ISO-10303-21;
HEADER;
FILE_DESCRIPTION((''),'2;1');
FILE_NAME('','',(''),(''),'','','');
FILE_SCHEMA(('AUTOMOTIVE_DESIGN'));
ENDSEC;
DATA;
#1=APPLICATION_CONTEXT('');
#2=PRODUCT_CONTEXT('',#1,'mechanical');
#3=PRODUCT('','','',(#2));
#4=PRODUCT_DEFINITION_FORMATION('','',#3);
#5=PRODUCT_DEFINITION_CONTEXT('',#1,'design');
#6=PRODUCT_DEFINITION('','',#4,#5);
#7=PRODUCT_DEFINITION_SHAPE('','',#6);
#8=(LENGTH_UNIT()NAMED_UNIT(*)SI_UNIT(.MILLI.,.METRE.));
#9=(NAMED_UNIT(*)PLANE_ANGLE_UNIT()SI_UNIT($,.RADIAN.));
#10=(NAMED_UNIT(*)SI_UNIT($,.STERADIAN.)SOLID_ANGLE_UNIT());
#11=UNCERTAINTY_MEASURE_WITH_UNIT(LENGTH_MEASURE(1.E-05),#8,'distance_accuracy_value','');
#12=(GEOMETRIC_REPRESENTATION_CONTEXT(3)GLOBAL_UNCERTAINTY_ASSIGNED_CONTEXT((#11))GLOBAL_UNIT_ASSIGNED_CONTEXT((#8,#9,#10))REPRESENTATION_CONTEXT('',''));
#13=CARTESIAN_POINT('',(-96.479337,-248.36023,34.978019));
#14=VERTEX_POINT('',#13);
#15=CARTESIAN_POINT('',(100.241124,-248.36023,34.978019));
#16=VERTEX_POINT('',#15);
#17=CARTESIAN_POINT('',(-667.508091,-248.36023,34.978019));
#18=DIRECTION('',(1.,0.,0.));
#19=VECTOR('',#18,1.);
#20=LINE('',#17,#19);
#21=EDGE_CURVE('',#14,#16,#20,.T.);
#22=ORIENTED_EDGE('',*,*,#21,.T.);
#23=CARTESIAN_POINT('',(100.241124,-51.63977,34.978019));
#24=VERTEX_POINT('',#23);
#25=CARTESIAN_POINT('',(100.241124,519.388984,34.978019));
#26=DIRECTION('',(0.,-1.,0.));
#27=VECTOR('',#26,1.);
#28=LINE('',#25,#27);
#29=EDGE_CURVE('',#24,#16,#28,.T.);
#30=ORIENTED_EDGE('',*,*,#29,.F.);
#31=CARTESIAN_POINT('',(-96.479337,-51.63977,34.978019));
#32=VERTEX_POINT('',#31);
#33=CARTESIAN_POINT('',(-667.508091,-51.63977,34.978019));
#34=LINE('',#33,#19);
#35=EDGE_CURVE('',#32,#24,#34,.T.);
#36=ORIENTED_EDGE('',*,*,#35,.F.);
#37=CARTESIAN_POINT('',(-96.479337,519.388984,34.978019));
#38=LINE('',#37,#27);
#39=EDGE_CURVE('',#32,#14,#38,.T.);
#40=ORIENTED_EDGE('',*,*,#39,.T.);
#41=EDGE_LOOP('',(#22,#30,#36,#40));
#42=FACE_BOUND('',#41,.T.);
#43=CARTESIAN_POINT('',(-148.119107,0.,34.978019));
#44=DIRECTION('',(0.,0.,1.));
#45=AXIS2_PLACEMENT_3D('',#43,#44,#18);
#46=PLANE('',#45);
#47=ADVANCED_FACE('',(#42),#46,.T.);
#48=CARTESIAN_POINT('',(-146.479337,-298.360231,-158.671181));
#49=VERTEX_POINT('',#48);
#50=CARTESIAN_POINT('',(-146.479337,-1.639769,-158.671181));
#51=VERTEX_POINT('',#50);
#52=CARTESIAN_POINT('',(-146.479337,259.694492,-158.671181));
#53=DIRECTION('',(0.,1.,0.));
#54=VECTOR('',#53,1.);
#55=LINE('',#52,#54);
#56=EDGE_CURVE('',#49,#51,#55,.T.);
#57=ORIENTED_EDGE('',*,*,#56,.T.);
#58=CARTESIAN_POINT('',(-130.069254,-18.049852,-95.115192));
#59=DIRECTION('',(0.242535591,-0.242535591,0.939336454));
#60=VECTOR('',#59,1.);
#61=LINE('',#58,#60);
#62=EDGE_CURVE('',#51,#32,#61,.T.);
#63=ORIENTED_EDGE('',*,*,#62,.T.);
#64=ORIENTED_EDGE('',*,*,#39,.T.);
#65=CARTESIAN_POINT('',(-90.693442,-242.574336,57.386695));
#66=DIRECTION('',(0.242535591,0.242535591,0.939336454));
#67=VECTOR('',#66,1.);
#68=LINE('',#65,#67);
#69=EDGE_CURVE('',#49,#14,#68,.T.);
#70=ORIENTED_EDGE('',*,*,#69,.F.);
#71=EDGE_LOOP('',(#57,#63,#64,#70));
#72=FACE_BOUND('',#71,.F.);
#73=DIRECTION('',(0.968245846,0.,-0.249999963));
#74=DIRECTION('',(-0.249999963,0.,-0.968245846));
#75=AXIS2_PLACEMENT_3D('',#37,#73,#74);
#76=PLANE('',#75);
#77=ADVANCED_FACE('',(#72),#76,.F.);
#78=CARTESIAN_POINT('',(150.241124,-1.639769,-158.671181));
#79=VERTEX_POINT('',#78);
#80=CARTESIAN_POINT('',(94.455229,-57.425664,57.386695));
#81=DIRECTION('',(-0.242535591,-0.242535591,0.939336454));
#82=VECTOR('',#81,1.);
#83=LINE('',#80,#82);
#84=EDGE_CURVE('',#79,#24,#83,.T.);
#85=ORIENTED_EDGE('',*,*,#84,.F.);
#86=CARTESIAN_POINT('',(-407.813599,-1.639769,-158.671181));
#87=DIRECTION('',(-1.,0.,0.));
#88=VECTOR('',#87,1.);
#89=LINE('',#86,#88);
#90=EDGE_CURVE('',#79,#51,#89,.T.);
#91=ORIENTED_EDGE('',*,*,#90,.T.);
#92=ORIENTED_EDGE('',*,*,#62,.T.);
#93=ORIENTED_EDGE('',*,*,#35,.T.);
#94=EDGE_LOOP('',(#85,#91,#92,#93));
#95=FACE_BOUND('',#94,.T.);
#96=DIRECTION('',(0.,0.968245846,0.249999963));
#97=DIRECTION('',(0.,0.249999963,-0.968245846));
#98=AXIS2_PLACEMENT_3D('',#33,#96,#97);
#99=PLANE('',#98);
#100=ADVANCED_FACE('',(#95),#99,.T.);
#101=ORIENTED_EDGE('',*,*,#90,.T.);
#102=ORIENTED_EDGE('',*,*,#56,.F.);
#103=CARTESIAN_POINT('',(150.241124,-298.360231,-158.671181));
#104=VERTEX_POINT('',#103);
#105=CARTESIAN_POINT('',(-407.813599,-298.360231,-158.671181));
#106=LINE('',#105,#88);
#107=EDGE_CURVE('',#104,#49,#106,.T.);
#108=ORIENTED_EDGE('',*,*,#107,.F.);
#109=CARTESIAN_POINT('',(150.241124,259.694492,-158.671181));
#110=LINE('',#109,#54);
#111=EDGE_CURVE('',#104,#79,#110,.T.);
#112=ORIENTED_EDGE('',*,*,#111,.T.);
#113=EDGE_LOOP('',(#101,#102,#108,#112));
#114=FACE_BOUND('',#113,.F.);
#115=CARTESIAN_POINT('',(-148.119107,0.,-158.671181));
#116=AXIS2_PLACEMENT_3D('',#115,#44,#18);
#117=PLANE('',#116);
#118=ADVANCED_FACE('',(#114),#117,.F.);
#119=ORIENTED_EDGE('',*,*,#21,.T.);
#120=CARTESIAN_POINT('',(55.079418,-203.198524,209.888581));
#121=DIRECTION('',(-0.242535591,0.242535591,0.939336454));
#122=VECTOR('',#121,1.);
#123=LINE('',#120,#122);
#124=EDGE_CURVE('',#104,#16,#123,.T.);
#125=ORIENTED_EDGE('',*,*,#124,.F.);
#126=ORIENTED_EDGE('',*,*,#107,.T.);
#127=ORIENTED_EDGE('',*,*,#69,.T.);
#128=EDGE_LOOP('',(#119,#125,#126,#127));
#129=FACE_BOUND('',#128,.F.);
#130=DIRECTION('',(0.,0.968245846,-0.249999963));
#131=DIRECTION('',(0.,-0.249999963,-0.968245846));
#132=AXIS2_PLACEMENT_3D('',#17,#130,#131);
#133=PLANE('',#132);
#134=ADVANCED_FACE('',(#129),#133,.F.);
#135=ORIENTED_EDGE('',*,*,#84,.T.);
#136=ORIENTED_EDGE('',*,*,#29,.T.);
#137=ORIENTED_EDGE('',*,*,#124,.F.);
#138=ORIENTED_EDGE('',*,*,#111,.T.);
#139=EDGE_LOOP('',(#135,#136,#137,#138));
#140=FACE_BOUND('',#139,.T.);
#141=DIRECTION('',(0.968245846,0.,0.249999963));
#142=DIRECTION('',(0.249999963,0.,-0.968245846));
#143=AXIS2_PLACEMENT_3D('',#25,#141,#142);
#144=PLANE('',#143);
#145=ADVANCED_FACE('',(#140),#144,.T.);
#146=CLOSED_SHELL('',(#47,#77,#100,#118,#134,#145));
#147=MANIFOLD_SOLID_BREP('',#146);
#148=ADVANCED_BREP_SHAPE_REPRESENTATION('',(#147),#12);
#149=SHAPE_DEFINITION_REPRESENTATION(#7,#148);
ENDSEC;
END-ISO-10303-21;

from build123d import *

# Parameters (mm, degrees)
F0_W        = 300
F0_H        = 193.6492
F1_DEPTH    = 300
F2_T1_DEPTH = 1338.777968426
F2_T3_DEPTH = 1338.777968426


# Not quite as in the source:
# - a fillet or chamfer that OpenCascade refuses, or shapes differently, is made with other operations: its cross-section is extruded or revolved along the edge and cut away or added


with BuildPart() as f1:
    # F0 (on Front) → F1 (new body)
    with BuildSketch(Plane.XZ):
        with Locations((1.8808934838, -61.8465812054)):
            Rectangle(F0_W, F0_H)
    extrude(amount=F1_DEPTH)

    # F2: chamfer of 200 x 51.6397698104 on 4 edges, made by hand

    # F2_s2 → F2_t1 (cut)
    with BuildSketch(Plane.XZ.offset(-519.388984213)):
        Polygon((100.2411236733, 34.9780187946), (151.8808934838, -165.0219812054), (151.8808934838, 34.9780187946), align=None)
        Polygon((-96.4793367058, 34.9780187946), (-148.1191065162, -165.0219812054), (-148.1191065162, 34.9780187946), align=None)
    extrude(amount=F2_T1_DEPTH, mode=Mode.SUBTRACT)

    # F2_s4 → F2_t3 (cut)
    with BuildSketch(Plane.YZ.offset(-667.5080907292)):
        Polygon((-51.6397698104, 34.9780187946), (0, -165.0219812054), (0, 34.9780187946), align=None)
        Polygon((-248.3602301896, 34.9780187946), (-300, -165.0219812054), (-300, 34.9780187946), align=None)
    extrude(amount=F2_T3_DEPTH, mode=Mode.SUBTRACT)


solid = f1.part
